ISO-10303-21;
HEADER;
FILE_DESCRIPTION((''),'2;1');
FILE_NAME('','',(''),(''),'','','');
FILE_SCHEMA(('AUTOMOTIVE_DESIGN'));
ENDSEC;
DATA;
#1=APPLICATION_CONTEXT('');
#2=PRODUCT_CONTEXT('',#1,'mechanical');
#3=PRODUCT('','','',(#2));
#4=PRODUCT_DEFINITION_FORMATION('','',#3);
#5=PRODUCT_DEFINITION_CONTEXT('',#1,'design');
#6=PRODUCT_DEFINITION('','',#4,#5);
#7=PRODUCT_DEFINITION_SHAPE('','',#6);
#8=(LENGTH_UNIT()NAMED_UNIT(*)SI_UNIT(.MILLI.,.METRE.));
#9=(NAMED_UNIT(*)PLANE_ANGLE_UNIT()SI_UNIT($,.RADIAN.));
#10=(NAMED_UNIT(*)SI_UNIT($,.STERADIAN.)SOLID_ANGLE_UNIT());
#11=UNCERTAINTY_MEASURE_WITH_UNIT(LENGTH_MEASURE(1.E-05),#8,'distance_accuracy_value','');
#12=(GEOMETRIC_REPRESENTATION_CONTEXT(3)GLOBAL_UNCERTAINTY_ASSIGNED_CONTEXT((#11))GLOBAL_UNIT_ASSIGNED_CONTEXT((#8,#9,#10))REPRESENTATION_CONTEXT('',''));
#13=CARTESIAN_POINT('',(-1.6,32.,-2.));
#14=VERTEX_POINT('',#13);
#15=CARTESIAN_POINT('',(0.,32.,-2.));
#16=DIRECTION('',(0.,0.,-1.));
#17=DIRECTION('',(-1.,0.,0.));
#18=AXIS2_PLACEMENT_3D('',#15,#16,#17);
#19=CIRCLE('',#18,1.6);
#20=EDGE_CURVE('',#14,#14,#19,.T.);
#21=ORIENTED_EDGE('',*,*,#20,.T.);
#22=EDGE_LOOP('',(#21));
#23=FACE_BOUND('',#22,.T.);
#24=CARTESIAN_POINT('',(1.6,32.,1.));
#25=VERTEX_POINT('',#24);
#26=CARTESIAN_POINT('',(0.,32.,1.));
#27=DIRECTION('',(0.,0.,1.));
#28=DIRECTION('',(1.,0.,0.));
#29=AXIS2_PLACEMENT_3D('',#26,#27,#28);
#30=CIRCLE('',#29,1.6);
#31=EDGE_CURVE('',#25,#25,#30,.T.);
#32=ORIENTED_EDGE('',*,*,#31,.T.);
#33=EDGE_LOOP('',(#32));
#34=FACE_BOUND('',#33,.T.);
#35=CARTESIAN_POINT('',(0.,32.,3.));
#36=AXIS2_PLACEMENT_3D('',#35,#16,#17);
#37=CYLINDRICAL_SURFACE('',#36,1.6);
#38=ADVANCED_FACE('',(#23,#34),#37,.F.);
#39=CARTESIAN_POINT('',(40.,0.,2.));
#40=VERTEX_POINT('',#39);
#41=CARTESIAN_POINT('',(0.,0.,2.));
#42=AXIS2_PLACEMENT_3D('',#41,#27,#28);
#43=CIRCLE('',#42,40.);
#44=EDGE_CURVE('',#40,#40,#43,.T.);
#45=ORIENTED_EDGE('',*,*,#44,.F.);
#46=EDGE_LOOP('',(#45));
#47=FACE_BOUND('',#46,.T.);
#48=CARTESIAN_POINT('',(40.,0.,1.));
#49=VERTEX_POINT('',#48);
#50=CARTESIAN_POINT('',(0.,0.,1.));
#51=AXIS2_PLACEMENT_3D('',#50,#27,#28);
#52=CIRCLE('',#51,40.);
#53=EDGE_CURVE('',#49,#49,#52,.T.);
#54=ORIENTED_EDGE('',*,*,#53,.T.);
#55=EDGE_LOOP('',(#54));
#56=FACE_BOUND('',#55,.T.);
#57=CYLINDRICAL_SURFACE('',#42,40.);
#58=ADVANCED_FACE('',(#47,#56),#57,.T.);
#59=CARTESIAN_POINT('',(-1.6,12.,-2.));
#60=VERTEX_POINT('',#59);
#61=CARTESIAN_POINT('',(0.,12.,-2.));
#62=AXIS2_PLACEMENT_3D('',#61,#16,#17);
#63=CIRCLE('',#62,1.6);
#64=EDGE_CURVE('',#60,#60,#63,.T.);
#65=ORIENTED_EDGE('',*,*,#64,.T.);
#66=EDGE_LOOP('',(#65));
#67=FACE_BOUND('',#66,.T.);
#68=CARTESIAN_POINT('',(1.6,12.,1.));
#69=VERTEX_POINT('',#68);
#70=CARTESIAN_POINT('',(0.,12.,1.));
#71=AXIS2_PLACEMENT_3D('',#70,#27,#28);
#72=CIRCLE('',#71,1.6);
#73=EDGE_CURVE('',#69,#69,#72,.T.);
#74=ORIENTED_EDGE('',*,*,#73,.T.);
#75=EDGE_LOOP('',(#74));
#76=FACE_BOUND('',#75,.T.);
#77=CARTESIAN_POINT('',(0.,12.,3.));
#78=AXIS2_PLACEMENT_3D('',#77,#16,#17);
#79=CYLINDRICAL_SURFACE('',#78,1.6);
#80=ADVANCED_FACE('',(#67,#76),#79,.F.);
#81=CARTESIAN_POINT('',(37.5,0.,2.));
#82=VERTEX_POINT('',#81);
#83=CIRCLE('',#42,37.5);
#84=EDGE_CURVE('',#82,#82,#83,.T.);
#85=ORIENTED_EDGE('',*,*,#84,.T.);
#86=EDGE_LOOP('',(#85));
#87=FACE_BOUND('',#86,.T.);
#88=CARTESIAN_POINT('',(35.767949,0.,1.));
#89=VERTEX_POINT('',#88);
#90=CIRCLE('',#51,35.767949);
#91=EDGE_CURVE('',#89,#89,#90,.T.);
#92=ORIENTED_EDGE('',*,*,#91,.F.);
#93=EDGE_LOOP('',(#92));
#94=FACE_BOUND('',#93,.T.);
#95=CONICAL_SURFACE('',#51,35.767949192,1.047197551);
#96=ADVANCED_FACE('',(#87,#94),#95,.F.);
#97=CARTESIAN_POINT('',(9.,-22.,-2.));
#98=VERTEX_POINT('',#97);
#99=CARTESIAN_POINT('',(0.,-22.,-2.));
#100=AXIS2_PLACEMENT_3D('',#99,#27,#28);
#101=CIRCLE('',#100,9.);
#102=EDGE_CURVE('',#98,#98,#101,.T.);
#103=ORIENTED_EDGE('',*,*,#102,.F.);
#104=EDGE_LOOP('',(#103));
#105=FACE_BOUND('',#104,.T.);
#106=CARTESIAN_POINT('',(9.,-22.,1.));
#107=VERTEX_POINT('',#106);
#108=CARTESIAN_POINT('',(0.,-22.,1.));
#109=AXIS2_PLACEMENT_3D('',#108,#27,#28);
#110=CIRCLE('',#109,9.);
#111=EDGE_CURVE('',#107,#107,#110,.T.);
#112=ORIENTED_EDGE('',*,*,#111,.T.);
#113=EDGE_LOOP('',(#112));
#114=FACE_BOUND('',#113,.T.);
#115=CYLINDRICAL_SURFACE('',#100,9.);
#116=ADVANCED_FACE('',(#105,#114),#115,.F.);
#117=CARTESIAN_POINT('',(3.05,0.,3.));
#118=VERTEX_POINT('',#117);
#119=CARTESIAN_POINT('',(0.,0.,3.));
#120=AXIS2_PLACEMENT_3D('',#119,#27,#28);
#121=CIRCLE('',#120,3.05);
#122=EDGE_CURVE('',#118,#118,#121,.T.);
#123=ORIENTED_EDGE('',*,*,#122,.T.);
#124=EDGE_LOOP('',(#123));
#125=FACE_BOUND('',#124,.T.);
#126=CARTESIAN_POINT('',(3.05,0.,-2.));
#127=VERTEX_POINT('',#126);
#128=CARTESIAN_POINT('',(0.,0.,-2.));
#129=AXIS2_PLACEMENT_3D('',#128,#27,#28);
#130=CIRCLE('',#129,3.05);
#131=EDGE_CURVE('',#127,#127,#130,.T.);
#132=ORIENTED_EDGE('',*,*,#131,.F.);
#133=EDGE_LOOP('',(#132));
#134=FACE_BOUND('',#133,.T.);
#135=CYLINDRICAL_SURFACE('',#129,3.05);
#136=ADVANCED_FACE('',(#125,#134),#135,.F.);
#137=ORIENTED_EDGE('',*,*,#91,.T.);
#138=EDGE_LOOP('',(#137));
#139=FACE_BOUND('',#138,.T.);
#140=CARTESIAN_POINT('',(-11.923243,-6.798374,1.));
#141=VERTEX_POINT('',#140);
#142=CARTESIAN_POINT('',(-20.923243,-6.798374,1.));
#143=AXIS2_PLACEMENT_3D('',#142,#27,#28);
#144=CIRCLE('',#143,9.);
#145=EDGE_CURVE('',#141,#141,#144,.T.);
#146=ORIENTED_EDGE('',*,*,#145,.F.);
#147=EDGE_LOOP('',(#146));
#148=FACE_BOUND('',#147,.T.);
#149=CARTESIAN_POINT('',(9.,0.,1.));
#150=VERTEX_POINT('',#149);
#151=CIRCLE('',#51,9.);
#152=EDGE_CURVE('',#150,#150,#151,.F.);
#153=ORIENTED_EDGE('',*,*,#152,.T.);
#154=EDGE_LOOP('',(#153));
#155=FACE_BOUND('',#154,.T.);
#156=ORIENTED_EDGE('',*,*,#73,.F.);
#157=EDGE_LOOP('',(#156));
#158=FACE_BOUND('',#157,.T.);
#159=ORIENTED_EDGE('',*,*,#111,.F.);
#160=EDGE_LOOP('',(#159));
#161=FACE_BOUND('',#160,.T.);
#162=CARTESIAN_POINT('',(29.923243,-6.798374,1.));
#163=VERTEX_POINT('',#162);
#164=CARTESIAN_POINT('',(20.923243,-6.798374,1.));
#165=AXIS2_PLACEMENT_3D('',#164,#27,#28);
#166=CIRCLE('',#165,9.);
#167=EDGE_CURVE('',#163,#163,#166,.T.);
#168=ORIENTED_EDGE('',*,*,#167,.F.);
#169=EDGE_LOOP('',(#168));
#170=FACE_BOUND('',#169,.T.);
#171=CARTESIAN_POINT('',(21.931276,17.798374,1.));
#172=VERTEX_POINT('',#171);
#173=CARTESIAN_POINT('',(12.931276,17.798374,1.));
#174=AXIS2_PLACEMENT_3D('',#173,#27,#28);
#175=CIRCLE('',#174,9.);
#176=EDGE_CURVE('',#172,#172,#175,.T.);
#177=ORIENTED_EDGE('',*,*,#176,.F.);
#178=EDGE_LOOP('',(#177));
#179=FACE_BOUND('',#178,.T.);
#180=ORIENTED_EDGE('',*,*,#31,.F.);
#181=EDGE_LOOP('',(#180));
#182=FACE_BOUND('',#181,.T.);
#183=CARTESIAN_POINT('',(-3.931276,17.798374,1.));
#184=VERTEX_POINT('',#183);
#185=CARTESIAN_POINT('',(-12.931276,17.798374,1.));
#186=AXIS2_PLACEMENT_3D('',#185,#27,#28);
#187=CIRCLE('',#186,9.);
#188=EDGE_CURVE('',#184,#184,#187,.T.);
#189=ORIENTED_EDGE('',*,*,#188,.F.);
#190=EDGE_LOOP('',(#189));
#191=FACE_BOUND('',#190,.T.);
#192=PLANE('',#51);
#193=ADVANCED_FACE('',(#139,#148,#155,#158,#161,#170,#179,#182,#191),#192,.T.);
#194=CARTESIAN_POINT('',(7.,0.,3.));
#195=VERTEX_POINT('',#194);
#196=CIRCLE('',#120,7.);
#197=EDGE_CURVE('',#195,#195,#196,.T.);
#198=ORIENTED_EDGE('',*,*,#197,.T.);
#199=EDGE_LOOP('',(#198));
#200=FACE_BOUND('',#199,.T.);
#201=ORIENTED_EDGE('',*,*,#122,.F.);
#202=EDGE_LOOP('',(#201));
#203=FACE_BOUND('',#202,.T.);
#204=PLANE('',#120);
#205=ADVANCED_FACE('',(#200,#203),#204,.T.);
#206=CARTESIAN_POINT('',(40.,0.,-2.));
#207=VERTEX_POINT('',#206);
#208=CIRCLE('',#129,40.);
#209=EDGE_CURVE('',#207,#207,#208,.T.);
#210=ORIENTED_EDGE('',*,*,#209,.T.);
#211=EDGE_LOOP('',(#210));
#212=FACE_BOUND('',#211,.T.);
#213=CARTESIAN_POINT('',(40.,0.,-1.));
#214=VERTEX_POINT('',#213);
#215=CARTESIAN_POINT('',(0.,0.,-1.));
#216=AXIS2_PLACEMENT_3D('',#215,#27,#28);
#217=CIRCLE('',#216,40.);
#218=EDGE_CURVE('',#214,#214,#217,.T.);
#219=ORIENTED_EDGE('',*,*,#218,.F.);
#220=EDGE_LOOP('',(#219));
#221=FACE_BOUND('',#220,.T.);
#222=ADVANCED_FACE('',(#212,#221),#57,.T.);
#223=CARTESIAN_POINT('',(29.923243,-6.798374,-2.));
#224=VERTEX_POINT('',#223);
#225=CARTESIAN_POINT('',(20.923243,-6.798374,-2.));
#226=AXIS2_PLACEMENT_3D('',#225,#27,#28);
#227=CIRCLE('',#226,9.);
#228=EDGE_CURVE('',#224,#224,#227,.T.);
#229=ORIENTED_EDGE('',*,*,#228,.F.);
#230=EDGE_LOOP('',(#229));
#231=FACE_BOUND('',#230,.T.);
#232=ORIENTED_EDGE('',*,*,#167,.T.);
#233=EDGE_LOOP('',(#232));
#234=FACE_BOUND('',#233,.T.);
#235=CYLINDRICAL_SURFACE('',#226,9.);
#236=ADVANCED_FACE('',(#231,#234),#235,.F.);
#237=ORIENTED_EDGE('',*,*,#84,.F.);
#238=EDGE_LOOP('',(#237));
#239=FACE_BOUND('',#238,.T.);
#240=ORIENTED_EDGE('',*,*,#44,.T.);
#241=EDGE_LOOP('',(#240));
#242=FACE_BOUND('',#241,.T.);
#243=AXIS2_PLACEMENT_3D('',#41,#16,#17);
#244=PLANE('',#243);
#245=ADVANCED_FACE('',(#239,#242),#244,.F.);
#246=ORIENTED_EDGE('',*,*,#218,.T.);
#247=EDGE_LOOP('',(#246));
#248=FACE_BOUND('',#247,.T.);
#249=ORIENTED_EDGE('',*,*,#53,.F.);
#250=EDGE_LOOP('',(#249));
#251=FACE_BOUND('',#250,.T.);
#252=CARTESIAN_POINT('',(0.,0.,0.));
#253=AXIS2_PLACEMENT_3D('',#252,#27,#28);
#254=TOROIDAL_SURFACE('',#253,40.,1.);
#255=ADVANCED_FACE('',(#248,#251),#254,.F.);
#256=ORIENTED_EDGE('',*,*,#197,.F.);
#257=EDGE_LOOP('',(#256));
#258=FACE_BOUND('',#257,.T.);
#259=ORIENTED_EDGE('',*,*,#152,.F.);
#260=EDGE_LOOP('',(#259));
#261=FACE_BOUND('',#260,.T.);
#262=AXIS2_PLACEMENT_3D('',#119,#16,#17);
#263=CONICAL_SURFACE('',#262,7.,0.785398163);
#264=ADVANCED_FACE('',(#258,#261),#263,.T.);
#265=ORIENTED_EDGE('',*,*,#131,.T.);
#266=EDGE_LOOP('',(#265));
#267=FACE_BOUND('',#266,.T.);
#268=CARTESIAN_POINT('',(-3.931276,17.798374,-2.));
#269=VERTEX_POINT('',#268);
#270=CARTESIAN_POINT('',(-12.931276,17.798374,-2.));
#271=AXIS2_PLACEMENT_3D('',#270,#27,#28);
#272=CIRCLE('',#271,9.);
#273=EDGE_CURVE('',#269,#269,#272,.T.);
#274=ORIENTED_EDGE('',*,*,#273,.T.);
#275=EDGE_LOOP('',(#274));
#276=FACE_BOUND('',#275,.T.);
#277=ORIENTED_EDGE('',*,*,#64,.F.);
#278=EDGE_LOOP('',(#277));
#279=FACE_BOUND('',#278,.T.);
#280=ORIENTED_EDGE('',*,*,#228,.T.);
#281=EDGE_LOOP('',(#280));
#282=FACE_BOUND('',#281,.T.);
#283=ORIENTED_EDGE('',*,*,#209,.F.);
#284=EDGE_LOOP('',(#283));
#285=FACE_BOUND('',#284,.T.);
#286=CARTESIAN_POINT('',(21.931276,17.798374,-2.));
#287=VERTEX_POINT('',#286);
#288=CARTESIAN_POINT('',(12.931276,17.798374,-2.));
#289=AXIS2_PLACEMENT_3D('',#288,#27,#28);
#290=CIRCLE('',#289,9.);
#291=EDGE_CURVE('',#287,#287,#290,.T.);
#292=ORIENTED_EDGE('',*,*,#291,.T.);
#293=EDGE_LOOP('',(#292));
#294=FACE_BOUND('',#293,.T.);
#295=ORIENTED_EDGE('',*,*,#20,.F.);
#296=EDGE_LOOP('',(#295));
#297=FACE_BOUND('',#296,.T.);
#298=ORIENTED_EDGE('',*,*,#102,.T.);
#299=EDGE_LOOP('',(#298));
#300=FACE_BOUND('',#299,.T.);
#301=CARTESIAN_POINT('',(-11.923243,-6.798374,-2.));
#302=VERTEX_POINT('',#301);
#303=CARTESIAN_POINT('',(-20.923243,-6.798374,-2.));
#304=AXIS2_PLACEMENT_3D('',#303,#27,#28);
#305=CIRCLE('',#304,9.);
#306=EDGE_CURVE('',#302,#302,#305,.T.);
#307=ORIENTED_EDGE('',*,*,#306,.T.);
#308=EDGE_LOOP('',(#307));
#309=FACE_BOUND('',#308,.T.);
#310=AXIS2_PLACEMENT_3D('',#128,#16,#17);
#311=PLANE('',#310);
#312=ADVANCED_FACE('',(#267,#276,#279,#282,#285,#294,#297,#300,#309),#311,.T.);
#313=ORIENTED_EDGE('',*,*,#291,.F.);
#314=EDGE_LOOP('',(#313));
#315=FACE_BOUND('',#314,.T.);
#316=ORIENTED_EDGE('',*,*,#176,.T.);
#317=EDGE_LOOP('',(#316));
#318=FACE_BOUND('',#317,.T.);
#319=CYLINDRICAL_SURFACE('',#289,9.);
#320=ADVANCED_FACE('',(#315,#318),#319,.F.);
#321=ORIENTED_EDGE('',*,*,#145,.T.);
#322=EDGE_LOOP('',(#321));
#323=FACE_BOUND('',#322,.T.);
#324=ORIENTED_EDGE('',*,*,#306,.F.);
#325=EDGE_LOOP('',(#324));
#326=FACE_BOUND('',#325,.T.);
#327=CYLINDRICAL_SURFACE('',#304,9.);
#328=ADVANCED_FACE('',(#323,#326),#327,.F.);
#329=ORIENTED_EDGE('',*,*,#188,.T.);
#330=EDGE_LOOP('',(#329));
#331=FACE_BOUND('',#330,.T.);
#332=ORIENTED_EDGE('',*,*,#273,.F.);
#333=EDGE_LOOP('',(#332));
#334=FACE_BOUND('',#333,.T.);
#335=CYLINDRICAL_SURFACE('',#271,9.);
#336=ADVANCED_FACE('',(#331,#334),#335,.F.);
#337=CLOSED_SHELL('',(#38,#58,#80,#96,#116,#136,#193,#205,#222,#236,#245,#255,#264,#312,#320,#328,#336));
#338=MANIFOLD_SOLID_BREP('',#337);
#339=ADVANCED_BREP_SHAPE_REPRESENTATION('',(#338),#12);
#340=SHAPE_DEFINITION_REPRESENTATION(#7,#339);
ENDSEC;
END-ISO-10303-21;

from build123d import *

# Parameters (mm, degrees)
SKETCH2_W          = 7
SKETCH2_H          = 1
SKETCH3_R          = 3.05
CUT_EXTRUDE1_DEPTH = 57.789083458
CHAMFER1_SIZE      = 2
SKETCH4_R          = 9
CUT_EXTRUDE2_DEPTH = 57.648036153
SKETCH5_R          = 1.6
CUT_EXTRUDE3_DEPTH = 57.789083458


with BuildPart() as part:
    # Sketch2 → Revolve1 (revolve)
    with BuildSketch(Plane(origin=(0, 0, 0), x_dir=(1, 0, 0), z_dir=(0, 1, 0))):
        with Locations((3.5, -2.5)):
            Rectangle(SKETCH2_W, SKETCH2_H)
        with BuildLine():
            Line((0, 2), (0, -2))
            Line((0, -2), (7, -2))
            Line((7, -2), (7, -1))
            Line((7, -1), (35.767949192, -1))
            Line((35.767949192, -1), (37.5, -2))
            Line((37.5, -2), (40, -2))
            Line((40, -2), (40, -1))
            ThreePointArc((40, -1), (39, 0), (40, 1))
            Line((40, 1), (40, 2))
            Line((40, 2), (0, 2))
        make_face()
    revolve(axis=Axis((0, 0, 2), (0, 0, -1)))

    # Sketch3 → Cut-Extrude1 (cut, through all)
    with BuildSketch(Plane.XY.offset(3)):
        Circle(SKETCH3_R)
    extrude(amount=-CUT_EXTRUDE1_DEPTH, mode=Mode.SUBTRACT)

    # Chamfer1
    chamfer1_edges = [part.edges().sort_by_distance(p)[0] for p in [
        (-7, 0, 1),
    ]]
    chamfer(chamfer1_edges, length=CHAMFER1_SIZE - 0.0001)  # a hair under: the kernel refuses the full size

    # Sketch4 → Cut-Extrude2 (cut, through all)
    with BuildSketch(Plane.XY.offset(1)):
        with Locations((0, -22)):
            Circle(SKETCH4_R)
        with Locations((-20.923243358, -6.798373876)):
            Circle(SKETCH4_R)
        with Locations((-12.93127555, 17.798373876)):
            Circle(SKETCH4_R)
        with Locations((12.93127555, 17.798373876)):
            Circle(SKETCH4_R)
        with Locations((20.923243358, -6.798373876)):
            Circle(SKETCH4_R)
    extrude(amount=-CUT_EXTRUDE2_DEPTH, mode=Mode.SUBTRACT)

    # Sketch5 → Cut-Extrude3 (cut, through all)
    with BuildSketch(Plane(origin=(0, 0, -2), x_dir=(-1, 0, 0), z_dir=(0, 0, -1))):
        with Locations((0, 12)):
            Circle(SKETCH5_R)
        with Locations((0, 32)):
            Circle(SKETCH5_R)
    extrude(amount=-CUT_EXTRUDE3_DEPTH, mode=Mode.SUBTRACT)


solid = part.part
